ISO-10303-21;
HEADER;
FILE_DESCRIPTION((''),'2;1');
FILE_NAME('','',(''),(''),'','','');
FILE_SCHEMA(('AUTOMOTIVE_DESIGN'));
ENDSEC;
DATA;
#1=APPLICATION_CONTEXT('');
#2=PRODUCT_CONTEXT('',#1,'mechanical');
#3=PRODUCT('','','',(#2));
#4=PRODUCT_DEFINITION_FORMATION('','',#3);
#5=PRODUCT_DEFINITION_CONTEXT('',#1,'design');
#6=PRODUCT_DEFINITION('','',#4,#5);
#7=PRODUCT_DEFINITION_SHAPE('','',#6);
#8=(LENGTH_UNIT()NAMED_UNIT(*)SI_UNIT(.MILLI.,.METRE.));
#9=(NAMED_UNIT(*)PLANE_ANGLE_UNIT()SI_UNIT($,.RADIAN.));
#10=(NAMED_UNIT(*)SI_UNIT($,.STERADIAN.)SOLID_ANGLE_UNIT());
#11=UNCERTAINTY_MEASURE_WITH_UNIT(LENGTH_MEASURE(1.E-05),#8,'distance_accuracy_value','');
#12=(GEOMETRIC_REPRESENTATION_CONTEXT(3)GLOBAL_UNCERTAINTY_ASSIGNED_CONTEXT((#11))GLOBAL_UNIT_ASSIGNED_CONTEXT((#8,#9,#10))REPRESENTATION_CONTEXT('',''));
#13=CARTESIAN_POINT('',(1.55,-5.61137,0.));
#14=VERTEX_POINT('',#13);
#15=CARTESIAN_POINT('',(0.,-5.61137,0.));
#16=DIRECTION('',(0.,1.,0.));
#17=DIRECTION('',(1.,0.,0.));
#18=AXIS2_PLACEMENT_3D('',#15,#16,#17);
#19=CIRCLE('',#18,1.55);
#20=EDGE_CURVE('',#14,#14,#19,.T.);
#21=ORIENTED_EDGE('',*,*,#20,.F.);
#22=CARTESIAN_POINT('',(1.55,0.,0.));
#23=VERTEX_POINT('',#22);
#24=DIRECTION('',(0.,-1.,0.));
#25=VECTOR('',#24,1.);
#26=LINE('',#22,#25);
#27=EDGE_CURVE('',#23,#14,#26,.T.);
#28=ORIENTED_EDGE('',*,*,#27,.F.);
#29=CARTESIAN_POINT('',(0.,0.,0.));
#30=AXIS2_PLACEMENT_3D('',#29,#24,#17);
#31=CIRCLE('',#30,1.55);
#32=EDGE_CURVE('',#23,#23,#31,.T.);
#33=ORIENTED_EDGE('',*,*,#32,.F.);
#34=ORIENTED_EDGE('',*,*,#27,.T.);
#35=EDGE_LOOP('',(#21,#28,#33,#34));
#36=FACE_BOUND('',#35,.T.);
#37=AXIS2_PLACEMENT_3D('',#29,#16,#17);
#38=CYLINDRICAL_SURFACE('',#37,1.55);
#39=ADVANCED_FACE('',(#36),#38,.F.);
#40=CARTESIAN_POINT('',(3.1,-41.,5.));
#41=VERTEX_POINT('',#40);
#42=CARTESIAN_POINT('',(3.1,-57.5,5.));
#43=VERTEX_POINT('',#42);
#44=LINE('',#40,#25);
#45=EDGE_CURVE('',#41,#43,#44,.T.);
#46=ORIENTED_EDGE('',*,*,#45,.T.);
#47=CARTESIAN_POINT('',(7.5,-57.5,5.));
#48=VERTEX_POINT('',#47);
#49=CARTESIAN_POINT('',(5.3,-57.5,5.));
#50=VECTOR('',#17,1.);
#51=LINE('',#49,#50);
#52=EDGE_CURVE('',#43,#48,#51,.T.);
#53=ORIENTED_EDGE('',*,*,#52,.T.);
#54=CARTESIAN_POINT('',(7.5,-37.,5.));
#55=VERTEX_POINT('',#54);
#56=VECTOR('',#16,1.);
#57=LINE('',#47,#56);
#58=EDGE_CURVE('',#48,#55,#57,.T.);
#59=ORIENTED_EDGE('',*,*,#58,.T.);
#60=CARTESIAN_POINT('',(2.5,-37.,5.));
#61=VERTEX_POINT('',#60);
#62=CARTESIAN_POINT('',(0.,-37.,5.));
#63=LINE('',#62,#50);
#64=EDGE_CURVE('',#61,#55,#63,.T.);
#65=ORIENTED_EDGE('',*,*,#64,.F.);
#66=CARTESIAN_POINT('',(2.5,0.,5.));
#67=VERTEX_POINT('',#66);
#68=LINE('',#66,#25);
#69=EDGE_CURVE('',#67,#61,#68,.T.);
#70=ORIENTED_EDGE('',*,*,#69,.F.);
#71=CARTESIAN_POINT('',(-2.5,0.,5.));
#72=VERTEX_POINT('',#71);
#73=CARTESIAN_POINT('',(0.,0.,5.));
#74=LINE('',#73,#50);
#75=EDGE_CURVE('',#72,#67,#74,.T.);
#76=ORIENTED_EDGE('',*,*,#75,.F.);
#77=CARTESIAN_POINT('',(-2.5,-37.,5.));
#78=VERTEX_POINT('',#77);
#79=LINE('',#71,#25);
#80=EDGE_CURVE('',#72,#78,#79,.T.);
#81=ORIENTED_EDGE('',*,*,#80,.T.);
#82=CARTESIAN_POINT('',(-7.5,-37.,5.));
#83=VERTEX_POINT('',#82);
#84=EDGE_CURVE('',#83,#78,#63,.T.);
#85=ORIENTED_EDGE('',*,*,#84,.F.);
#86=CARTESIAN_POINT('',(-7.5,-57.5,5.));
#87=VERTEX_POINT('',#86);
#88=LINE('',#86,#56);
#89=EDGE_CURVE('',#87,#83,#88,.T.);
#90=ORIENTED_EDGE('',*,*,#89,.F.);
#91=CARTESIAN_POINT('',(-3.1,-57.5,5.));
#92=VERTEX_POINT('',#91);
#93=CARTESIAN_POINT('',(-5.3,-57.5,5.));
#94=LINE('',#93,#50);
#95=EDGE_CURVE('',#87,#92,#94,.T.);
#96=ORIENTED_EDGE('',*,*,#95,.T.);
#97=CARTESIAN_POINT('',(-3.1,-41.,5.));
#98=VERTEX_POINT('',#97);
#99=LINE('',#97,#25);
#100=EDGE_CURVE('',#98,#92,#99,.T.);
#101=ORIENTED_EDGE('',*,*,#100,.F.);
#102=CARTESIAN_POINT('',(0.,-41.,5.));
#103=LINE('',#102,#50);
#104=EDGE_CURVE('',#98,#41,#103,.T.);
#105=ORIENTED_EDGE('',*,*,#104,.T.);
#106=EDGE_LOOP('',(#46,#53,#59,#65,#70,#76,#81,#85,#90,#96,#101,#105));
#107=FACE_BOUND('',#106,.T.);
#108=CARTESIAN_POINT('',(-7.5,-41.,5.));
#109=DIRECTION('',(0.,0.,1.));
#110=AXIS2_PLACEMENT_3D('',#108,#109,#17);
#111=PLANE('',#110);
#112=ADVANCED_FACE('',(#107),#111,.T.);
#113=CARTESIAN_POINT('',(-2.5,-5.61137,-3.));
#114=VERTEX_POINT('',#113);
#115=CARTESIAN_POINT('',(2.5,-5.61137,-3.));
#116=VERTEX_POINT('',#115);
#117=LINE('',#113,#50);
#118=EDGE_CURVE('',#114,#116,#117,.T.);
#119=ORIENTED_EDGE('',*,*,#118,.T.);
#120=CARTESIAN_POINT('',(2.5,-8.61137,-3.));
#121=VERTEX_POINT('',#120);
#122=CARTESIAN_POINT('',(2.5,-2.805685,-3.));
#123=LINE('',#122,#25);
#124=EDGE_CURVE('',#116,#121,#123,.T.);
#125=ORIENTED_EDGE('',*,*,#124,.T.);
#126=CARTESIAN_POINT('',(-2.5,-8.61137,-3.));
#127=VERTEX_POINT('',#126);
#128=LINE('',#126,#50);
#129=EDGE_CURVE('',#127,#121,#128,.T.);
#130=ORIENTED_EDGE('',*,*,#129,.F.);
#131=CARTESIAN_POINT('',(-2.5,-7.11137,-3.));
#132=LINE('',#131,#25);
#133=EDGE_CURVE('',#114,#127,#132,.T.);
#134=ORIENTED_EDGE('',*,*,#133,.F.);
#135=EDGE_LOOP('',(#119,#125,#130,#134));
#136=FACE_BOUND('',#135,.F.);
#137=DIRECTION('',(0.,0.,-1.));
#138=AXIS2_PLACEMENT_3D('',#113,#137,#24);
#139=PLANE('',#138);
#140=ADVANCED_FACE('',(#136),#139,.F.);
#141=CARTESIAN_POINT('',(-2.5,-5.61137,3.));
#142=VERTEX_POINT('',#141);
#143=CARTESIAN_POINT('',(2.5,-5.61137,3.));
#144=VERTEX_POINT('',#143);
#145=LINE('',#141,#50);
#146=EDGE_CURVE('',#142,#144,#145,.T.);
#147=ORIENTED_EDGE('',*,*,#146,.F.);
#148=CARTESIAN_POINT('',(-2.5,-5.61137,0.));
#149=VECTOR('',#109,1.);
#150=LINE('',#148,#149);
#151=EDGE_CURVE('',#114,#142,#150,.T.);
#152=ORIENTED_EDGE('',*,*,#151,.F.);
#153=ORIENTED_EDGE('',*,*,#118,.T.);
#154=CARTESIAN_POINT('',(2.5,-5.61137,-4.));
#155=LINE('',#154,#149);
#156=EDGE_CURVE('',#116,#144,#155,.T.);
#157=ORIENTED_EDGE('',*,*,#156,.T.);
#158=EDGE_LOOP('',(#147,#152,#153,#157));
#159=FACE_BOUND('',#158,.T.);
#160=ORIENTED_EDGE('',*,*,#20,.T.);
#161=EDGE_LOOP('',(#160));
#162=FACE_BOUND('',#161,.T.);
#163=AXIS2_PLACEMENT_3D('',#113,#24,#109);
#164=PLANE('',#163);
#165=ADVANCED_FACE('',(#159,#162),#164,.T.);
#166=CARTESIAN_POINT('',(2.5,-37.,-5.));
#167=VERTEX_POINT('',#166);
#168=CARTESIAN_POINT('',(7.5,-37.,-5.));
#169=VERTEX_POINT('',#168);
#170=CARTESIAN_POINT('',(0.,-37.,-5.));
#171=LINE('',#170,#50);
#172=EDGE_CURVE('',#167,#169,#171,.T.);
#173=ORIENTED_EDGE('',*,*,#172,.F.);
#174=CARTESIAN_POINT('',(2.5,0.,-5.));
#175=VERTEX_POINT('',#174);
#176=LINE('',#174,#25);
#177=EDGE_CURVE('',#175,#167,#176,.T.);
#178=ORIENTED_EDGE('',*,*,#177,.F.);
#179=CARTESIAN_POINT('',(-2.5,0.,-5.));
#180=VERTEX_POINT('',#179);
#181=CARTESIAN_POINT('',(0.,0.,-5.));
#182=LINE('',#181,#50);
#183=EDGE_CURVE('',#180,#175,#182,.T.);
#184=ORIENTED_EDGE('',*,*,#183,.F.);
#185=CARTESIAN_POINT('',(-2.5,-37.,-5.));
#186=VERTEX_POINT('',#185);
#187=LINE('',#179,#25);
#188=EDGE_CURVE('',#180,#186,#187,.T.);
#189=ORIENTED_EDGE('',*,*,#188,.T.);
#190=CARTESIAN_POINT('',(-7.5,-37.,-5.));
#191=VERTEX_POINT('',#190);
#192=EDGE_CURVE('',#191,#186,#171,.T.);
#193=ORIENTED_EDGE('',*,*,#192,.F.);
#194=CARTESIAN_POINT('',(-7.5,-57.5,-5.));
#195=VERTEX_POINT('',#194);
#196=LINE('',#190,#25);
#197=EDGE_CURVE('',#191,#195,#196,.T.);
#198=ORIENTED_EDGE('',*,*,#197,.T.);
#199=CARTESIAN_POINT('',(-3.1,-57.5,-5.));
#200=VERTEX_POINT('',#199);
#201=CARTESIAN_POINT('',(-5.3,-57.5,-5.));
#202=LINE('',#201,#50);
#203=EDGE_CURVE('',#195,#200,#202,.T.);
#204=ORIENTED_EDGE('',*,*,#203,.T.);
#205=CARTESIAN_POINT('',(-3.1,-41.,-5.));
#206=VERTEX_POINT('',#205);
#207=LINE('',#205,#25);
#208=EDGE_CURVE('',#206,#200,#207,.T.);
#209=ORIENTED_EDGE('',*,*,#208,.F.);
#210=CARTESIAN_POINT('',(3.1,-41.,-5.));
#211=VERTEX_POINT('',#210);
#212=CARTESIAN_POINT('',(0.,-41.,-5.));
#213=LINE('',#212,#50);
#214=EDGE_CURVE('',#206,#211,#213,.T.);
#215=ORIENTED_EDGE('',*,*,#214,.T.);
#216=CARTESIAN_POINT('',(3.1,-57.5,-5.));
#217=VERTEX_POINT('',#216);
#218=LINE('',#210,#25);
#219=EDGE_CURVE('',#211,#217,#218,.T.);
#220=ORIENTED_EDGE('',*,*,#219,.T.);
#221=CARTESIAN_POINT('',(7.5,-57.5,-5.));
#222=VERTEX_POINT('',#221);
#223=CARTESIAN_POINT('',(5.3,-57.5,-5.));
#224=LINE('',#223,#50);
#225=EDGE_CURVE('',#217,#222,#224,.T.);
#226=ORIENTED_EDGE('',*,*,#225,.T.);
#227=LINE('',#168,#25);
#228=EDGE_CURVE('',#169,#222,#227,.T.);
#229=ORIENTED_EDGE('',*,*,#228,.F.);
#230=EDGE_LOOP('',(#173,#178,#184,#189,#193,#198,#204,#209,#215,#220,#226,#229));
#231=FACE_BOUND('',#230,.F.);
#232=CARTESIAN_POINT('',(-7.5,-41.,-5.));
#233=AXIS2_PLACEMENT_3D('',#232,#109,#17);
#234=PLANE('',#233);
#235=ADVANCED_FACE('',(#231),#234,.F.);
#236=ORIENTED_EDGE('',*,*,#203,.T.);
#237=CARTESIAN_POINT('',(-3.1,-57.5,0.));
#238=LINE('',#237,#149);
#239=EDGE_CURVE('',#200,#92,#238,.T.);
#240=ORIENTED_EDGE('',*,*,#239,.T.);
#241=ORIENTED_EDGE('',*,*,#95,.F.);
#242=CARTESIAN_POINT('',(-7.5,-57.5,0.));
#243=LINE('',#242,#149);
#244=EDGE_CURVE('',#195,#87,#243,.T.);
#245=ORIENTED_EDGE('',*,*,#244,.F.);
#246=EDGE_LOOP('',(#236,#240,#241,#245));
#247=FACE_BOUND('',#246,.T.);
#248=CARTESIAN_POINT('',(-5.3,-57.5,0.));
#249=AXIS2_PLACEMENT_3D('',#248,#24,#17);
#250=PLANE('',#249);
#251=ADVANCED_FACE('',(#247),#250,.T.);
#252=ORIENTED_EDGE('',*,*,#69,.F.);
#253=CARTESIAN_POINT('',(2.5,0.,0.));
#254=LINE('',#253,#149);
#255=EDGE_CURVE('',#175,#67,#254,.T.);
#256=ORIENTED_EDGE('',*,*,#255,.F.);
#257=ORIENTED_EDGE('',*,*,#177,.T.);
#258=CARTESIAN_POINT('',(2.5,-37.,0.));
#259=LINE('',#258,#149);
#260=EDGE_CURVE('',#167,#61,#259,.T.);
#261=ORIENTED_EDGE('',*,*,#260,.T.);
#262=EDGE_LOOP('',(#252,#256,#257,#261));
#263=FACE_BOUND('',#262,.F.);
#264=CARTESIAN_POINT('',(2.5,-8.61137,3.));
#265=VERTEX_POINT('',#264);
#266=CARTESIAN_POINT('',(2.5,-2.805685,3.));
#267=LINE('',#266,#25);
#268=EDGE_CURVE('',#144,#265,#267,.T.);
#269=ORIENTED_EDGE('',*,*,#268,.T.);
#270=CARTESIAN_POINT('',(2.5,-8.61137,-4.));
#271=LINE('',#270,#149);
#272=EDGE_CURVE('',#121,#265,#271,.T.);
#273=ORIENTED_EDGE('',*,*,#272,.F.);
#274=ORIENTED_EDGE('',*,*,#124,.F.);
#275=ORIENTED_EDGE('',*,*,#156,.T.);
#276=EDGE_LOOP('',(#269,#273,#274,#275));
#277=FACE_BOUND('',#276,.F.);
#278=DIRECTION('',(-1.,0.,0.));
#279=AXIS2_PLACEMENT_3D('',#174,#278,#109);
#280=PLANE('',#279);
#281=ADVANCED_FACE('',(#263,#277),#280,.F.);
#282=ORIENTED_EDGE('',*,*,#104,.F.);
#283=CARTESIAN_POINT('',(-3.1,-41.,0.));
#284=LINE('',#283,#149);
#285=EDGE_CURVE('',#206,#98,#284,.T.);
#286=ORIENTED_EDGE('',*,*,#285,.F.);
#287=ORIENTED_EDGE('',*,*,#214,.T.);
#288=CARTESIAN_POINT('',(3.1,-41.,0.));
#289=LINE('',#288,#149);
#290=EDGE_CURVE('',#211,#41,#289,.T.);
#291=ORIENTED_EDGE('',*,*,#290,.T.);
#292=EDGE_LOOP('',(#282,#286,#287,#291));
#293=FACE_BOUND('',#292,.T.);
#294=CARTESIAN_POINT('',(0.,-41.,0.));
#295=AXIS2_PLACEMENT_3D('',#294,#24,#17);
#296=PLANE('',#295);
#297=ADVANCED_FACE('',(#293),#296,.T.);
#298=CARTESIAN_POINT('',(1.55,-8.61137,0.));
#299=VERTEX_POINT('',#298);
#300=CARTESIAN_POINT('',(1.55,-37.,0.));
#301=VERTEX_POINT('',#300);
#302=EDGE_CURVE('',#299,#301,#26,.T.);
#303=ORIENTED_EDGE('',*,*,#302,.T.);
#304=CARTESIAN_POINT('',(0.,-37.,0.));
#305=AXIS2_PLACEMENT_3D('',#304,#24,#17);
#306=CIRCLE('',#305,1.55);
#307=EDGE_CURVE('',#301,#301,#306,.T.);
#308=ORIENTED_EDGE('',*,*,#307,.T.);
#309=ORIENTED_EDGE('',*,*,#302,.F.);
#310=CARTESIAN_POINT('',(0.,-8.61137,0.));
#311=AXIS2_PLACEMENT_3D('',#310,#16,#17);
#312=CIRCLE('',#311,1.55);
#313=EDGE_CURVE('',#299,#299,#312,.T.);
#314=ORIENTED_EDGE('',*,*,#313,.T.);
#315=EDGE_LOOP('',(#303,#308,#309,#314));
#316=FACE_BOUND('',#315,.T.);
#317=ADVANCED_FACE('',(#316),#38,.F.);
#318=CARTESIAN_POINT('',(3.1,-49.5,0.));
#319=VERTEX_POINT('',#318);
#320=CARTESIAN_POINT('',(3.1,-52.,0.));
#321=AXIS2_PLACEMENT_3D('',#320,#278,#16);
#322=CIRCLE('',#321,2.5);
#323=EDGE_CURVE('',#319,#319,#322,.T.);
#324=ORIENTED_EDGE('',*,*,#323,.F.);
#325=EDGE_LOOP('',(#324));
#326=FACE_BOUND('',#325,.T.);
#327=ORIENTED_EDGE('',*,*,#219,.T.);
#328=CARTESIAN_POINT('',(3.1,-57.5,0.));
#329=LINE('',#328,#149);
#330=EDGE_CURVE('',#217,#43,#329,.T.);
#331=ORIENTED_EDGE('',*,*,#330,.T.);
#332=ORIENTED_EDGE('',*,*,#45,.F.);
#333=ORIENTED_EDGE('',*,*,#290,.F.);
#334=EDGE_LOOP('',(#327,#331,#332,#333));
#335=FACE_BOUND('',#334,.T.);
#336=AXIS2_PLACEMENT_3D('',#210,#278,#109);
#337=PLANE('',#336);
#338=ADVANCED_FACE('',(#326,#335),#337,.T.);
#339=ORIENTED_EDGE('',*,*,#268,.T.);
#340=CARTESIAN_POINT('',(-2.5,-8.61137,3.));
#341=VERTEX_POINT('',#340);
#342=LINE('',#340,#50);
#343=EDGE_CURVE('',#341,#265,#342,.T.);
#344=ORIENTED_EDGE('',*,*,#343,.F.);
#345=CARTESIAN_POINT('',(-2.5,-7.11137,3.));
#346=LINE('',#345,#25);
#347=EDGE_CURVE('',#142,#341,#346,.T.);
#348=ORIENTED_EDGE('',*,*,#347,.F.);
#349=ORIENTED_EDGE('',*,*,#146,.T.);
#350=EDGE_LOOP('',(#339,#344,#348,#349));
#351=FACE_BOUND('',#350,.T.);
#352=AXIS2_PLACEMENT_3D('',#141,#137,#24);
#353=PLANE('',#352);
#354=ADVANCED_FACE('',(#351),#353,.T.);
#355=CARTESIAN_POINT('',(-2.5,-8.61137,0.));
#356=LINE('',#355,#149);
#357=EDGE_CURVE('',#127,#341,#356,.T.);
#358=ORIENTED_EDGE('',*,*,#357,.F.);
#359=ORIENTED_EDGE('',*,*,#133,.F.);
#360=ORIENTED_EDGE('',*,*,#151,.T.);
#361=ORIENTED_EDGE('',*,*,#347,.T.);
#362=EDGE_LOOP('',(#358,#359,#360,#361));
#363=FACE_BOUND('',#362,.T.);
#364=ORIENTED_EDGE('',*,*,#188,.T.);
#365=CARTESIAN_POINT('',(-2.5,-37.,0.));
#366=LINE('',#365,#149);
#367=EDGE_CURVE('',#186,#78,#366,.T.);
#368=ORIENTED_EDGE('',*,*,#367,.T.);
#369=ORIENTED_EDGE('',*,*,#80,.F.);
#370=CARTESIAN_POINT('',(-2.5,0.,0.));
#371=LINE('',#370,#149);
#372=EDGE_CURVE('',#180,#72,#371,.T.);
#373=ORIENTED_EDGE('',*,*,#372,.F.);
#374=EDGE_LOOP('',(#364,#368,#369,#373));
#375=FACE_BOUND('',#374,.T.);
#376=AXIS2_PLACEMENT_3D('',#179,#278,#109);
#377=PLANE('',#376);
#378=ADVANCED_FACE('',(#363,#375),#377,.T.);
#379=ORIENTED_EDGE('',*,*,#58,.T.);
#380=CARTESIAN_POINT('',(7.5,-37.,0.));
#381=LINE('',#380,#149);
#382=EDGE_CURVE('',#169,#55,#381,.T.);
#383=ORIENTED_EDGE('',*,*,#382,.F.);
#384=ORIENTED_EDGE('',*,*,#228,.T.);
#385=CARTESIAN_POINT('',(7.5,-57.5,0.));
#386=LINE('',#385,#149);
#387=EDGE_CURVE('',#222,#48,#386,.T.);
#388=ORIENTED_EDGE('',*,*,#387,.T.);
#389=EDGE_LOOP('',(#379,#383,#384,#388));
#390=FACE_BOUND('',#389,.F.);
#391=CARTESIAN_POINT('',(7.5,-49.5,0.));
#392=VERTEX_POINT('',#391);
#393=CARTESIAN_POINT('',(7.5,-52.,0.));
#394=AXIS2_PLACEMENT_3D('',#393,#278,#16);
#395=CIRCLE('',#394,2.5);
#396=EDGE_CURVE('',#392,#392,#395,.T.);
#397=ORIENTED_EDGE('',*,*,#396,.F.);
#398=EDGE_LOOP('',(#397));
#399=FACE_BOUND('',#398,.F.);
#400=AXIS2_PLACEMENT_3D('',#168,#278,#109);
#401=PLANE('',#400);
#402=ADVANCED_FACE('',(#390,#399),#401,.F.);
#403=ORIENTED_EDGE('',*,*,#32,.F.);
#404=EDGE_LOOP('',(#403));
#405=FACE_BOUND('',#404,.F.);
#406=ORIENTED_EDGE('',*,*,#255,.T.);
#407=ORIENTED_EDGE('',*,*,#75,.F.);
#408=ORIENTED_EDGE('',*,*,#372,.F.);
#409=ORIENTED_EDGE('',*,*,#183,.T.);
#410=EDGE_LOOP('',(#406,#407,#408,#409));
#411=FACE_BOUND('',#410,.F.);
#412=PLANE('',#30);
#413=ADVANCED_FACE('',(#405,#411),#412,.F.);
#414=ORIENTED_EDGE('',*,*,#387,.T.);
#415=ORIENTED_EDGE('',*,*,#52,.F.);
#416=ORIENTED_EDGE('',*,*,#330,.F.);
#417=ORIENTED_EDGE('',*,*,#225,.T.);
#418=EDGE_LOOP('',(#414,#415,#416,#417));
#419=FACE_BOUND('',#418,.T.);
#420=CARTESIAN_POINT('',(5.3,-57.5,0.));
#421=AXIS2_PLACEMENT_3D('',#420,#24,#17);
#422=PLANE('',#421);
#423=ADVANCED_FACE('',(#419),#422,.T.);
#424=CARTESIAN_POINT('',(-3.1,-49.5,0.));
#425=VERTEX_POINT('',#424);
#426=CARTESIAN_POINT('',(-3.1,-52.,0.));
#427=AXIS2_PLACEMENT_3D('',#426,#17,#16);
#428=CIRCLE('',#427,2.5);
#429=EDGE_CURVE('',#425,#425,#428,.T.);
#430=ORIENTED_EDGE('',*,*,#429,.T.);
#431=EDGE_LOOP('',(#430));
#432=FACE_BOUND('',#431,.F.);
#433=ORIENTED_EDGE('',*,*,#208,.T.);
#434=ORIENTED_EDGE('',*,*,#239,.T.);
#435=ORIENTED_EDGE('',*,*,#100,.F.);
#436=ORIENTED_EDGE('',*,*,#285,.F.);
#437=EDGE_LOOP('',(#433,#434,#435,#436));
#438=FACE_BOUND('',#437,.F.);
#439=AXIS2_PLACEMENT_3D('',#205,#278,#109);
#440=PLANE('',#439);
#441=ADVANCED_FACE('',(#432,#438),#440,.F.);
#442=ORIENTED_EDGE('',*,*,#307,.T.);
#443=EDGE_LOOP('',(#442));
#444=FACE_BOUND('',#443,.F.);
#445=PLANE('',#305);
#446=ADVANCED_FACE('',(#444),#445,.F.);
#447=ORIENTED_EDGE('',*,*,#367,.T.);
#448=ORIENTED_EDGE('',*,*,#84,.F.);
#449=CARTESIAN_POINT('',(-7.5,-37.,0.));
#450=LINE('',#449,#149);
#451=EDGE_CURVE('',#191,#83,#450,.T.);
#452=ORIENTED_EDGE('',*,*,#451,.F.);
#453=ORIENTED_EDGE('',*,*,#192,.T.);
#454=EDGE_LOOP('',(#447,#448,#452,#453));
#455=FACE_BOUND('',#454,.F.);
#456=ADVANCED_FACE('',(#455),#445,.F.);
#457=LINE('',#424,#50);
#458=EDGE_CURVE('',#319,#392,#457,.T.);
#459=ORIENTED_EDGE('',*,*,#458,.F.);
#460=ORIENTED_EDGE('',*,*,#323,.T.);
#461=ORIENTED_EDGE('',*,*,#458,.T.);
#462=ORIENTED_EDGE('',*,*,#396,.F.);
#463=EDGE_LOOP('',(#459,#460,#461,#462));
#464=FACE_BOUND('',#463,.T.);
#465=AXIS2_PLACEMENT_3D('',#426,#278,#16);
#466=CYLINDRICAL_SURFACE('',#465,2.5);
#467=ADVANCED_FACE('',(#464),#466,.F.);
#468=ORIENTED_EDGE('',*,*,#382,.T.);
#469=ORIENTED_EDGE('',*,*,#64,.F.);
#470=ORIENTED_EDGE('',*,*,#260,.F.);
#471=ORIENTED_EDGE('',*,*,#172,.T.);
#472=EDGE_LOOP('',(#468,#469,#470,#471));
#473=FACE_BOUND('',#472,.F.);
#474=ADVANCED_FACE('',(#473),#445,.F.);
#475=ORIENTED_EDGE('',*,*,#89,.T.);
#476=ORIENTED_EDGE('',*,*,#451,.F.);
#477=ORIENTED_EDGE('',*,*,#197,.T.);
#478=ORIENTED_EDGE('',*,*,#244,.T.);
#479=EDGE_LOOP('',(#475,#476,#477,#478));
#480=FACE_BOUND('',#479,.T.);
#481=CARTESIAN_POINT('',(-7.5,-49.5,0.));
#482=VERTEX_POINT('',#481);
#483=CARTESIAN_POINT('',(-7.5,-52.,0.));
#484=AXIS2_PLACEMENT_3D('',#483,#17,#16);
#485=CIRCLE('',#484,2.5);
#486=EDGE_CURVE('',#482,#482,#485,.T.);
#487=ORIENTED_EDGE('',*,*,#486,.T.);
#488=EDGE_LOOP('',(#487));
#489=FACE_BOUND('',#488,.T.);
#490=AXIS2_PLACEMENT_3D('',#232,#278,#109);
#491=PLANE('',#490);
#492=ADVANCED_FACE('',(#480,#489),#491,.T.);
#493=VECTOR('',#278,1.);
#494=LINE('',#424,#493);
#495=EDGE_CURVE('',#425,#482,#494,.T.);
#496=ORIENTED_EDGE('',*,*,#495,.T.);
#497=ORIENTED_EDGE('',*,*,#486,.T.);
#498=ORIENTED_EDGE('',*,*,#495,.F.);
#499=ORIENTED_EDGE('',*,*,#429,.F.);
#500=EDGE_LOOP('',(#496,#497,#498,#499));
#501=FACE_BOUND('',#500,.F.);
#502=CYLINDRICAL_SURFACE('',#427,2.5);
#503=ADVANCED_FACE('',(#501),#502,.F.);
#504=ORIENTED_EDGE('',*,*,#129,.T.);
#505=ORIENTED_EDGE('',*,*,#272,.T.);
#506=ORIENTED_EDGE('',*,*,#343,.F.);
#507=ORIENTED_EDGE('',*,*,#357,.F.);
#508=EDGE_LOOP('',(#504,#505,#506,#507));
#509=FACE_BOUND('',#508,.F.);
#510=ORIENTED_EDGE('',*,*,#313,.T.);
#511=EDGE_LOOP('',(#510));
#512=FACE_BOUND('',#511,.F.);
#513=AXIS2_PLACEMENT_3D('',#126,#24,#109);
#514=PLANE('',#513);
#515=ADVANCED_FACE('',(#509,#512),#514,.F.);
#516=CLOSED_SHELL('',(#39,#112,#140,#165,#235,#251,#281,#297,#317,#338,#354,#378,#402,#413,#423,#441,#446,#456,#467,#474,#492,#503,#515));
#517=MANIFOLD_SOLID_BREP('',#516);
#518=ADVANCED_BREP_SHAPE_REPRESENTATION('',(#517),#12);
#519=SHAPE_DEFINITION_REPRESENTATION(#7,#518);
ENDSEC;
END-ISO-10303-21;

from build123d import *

# Parameters (mm, degrees)
F0_W          = 5
F0_H          = 10
F0_R          = 1.55
F1_DEPTH      = 37
F2_W          = 15
F2_H          = 10
F3_DEPTH      = 4
F4_W          = 4.4
F4_H          = 10
F5_DEPTH      = 16.5
F6_R          = 2.5
F7_DEPTH      = 4.401
F7_DEPTH_BACK = 10.601
F8_W          = 3
F8_H          = 6
F9_DEPTH      = 10.001


# Not quite as in the source:
# - a feature names something its author has since deleted; it is built from what else it names


with BuildPart() as f1:
    # F0 (on Front) → F1 (new body)
    with BuildSketch(Plane.XZ):
        Rectangle(F0_W, F0_H)
        Circle(F0_R, mode=Mode.SUBTRACT)
    extrude(amount=F1_DEPTH)

    # F2 (on face) → F3 (join)
    with BuildSketch(Plane.XZ.offset(37)):
        Rectangle(F2_W, F2_H)
    extrude(amount=F3_DEPTH)

    # F4 (on face) → F5 (join)
    with BuildSketch(Plane.XZ.offset(41)):
        with Locations((-5.3, 0)):
            Rectangle(F4_W, F4_H)
        with Locations((5.3, 0)):
            Rectangle(F4_W, F4_H)
    extrude(amount=F5_DEPTH)

    # F6 (on face) → F7 (cut, two sides)
    with BuildSketch(Plane.YZ.offset(-3.1)) as f7_sk:
        with Locations((-52, 0)):
            Circle(F6_R)
    extrude(amount=-F7_DEPTH, mode=Mode.SUBTRACT)
    extrude(f7_sk.sketch, amount=F7_DEPTH_BACK, mode=Mode.SUBTRACT)

    # F8 (on face) → F9 (cut, through all)
    with BuildSketch(Plane(origin=(-2.5, 0, 0), x_dir=(0, -1, 0), z_dir=(-1, 0, 0))):
        with Locations((7.1113700978, 0)):
            Rectangle(F8_W, F8_H)
    extrude(amount=-F9_DEPTH, mode=Mode.SUBTRACT)


solid = f1.part
